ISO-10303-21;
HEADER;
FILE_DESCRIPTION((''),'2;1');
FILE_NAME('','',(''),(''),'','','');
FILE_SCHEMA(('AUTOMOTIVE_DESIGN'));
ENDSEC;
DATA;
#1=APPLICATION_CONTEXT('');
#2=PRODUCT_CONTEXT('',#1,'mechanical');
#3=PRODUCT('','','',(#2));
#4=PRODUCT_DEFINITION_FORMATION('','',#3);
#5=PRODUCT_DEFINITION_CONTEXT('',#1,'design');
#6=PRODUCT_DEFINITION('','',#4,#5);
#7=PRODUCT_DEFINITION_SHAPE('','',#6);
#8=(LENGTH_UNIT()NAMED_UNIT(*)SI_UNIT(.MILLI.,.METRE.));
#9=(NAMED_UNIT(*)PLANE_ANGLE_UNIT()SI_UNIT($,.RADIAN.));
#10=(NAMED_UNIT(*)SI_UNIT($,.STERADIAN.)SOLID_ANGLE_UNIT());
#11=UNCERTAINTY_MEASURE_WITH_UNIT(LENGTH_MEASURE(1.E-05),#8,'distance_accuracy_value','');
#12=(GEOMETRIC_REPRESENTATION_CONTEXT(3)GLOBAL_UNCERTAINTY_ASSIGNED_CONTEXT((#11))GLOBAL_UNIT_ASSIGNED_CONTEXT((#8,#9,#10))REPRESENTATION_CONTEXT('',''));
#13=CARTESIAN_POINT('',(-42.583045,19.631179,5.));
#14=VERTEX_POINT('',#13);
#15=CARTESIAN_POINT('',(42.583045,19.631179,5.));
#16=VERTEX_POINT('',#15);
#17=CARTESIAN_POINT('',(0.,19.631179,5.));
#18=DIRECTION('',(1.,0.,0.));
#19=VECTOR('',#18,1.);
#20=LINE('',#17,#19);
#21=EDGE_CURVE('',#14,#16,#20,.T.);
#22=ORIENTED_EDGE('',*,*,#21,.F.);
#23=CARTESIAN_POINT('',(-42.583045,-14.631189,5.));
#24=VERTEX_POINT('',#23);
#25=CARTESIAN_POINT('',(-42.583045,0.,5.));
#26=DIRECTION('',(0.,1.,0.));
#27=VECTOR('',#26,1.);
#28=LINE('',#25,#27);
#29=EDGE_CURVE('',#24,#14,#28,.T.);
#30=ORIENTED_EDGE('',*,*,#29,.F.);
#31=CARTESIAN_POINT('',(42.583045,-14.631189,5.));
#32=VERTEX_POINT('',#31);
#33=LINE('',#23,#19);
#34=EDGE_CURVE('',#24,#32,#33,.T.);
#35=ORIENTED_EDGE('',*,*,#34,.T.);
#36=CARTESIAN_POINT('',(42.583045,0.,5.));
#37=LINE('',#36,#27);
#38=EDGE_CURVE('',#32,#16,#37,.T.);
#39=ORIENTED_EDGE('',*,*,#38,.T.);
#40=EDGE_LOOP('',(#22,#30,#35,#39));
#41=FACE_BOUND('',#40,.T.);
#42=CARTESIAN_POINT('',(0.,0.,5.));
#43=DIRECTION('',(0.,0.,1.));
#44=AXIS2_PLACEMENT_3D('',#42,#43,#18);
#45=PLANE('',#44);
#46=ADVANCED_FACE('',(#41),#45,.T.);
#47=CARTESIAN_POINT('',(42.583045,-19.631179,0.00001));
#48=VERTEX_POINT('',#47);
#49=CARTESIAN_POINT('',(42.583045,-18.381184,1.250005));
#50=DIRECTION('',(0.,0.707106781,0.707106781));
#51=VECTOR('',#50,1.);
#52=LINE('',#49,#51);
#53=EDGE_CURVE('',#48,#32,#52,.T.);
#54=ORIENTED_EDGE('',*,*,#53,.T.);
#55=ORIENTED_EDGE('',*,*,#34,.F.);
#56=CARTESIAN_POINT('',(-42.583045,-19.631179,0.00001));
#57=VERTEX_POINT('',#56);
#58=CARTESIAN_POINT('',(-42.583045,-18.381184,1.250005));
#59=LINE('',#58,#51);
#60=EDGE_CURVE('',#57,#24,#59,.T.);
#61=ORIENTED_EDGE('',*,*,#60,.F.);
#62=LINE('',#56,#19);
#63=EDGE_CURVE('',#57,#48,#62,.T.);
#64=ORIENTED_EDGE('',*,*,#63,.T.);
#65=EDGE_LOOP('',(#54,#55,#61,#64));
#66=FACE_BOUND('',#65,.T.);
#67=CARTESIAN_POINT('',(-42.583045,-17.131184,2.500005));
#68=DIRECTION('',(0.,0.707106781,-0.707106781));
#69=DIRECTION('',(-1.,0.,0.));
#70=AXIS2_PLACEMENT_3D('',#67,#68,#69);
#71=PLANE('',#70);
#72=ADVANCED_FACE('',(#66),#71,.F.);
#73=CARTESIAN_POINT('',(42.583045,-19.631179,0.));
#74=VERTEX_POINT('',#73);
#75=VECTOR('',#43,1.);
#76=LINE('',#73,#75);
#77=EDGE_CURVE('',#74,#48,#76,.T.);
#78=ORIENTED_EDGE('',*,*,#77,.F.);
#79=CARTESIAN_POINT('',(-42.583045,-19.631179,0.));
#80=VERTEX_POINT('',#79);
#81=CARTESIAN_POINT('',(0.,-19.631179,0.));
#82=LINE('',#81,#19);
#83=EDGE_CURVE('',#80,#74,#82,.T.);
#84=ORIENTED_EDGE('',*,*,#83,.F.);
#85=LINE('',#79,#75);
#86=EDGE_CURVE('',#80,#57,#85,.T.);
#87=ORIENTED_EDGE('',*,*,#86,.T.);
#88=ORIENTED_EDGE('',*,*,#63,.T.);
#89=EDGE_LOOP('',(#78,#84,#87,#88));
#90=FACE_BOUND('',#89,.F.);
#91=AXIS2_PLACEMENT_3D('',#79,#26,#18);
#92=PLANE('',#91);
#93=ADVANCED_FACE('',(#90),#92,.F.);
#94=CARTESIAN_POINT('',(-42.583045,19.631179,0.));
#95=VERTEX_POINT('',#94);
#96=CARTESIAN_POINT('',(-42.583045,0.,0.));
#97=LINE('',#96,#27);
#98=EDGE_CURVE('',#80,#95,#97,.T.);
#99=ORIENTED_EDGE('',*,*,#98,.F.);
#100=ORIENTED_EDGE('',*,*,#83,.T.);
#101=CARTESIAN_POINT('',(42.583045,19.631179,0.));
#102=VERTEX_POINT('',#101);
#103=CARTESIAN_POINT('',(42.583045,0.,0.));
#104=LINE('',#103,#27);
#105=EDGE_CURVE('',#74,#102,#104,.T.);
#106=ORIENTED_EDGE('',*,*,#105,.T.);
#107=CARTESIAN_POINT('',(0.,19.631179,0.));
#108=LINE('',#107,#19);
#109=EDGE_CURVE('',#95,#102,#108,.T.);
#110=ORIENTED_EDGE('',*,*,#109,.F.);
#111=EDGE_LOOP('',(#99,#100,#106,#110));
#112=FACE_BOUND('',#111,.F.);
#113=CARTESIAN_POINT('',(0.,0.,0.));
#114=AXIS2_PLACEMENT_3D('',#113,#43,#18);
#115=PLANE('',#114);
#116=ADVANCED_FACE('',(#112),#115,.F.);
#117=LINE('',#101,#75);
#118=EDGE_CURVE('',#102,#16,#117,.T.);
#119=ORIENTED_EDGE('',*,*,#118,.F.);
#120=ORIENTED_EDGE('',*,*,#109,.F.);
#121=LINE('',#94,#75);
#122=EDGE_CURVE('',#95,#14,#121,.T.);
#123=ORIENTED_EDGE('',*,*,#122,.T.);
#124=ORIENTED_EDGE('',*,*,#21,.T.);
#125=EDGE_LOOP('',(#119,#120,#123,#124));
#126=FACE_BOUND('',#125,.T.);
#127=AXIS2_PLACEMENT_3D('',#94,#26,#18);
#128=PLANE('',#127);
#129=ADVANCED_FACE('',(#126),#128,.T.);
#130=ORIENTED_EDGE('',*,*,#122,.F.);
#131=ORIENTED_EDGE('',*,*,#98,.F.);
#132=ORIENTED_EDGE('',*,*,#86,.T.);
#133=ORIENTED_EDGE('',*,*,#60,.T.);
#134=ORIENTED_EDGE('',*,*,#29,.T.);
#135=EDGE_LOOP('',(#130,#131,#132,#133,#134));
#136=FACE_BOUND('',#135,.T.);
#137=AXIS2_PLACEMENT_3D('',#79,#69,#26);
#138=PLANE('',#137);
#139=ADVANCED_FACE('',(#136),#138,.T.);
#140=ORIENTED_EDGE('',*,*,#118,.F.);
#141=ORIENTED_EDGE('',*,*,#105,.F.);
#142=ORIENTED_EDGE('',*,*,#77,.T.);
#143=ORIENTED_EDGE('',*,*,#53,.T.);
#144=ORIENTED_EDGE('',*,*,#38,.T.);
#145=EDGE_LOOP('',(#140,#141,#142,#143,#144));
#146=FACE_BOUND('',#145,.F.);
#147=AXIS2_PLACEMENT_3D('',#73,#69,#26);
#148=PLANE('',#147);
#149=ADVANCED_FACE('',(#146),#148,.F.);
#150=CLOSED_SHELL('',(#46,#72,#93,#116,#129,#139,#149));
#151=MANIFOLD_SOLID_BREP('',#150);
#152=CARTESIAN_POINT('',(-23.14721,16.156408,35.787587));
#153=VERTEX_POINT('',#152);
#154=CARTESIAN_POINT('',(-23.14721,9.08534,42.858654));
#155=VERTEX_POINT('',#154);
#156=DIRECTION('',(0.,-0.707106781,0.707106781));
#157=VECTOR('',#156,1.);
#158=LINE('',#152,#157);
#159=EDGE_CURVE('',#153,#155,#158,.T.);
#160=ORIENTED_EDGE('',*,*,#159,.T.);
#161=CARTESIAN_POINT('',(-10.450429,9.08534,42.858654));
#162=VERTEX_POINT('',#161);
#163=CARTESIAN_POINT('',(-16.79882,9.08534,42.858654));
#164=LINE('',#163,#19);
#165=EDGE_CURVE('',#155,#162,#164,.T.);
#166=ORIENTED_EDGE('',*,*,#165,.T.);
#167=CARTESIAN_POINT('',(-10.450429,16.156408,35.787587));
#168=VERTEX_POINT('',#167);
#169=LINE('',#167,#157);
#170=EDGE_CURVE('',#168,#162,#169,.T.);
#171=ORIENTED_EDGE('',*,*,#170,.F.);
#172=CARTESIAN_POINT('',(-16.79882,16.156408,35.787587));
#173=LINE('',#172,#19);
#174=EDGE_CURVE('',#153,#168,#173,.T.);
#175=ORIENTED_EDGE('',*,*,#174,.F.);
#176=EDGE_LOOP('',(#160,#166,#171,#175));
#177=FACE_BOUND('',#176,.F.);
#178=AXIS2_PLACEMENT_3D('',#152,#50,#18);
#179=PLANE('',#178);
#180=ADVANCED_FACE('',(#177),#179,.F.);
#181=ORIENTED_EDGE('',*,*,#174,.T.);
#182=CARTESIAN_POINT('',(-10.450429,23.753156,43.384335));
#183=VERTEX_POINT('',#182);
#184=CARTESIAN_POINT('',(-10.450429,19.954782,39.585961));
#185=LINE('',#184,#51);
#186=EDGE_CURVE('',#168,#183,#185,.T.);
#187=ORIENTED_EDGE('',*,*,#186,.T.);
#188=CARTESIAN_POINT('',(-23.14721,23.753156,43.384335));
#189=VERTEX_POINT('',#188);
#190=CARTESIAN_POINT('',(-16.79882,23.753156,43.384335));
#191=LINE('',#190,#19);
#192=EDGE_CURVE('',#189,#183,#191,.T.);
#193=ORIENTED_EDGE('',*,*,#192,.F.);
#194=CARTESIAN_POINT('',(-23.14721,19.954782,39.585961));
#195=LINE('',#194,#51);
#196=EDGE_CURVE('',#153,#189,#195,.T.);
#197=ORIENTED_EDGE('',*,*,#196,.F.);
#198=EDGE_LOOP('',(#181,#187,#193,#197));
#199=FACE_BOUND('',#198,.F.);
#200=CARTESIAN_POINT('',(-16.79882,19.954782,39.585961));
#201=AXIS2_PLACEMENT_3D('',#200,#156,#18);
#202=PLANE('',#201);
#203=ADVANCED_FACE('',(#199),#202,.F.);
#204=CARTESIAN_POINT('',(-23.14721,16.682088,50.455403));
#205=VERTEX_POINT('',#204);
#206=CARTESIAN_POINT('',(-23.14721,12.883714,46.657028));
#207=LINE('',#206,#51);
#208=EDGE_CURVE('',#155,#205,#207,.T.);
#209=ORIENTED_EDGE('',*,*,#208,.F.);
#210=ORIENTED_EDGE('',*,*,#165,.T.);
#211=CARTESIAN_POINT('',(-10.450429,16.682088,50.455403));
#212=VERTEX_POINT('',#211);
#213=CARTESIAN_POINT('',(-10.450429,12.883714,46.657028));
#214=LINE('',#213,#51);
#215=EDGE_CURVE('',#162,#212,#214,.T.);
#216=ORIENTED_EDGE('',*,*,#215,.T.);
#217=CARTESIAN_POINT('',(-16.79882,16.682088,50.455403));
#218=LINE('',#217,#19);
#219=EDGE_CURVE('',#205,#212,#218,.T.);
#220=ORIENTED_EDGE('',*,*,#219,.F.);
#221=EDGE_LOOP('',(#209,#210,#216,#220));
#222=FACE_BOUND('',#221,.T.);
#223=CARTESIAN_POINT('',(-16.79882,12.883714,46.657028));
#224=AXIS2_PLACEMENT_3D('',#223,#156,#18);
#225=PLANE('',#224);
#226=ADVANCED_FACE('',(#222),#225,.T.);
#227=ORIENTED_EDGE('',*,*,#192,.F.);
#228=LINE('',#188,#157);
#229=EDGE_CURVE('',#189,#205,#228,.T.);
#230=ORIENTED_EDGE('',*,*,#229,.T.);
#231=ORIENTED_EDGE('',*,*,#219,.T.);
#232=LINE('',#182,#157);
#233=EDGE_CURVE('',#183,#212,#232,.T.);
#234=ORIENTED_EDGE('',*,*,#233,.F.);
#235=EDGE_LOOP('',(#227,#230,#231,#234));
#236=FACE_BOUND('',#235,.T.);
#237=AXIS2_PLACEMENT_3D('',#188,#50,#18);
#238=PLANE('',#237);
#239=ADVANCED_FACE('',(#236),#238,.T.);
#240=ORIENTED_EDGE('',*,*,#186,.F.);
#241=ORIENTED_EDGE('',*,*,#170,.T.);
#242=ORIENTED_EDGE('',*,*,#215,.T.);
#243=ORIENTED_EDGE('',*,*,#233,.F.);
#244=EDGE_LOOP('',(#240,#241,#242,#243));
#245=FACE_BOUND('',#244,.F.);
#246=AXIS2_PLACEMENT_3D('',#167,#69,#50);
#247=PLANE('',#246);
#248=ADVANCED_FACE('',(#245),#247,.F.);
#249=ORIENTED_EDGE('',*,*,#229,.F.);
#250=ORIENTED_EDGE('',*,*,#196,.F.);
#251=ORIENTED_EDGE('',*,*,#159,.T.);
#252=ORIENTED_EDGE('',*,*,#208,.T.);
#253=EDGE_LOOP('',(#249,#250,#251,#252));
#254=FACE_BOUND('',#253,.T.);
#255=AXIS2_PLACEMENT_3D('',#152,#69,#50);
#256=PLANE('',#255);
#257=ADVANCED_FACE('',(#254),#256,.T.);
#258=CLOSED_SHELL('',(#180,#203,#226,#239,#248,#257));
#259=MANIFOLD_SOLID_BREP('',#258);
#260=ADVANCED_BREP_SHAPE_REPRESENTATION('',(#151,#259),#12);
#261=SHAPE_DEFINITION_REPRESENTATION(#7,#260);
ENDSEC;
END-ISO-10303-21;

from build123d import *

# Parameters (mm, degrees)
F0_W     = 85.1660892367
F0_H     = 39.2623580992
F1_DEPTH = 5
F2_SIZE  = 4.99999
F3_W     = 12.6967811957
F3_H     = 10.7434242964
F4_DEPTH = 10


# Not quite as in the source:
# - a fillet or chamfer is up to 0.001 mm smaller than in the source, because OpenCascade refuses the exact size


with BuildPart() as f1:
    # F0 (on Top) → F1 (new body)
    with BuildSketch(Plane.XY):
        Rectangle(F0_W, F0_H)
    extrude(amount=F1_DEPTH)

    # F2 (size 5 in the source; OpenCascade refuses exactly that, so slightly less here)
    f2_edges = [f1.edges().sort_by_distance(p)[0] for p in [
        (0, -19.631179, 5),
    ]]
    chamfer(f2_edges, length=F2_SIZE)


with BuildPart() as f4:
    # F3 (on face) → F4 (new body)
    with BuildSketch(Plane(origin=(0, -9.8155895248, 9.8155895248), x_dir=(1, 0, 0), z_dir=(0, -0.7071067812, 0.7071067812))):
        with Locations((-16.7988198809, 42.101662606)):
            Rectangle(F3_W, F3_H)
    extrude(amount=F4_DEPTH)


solid = Compound([f1.part, f4.part])
